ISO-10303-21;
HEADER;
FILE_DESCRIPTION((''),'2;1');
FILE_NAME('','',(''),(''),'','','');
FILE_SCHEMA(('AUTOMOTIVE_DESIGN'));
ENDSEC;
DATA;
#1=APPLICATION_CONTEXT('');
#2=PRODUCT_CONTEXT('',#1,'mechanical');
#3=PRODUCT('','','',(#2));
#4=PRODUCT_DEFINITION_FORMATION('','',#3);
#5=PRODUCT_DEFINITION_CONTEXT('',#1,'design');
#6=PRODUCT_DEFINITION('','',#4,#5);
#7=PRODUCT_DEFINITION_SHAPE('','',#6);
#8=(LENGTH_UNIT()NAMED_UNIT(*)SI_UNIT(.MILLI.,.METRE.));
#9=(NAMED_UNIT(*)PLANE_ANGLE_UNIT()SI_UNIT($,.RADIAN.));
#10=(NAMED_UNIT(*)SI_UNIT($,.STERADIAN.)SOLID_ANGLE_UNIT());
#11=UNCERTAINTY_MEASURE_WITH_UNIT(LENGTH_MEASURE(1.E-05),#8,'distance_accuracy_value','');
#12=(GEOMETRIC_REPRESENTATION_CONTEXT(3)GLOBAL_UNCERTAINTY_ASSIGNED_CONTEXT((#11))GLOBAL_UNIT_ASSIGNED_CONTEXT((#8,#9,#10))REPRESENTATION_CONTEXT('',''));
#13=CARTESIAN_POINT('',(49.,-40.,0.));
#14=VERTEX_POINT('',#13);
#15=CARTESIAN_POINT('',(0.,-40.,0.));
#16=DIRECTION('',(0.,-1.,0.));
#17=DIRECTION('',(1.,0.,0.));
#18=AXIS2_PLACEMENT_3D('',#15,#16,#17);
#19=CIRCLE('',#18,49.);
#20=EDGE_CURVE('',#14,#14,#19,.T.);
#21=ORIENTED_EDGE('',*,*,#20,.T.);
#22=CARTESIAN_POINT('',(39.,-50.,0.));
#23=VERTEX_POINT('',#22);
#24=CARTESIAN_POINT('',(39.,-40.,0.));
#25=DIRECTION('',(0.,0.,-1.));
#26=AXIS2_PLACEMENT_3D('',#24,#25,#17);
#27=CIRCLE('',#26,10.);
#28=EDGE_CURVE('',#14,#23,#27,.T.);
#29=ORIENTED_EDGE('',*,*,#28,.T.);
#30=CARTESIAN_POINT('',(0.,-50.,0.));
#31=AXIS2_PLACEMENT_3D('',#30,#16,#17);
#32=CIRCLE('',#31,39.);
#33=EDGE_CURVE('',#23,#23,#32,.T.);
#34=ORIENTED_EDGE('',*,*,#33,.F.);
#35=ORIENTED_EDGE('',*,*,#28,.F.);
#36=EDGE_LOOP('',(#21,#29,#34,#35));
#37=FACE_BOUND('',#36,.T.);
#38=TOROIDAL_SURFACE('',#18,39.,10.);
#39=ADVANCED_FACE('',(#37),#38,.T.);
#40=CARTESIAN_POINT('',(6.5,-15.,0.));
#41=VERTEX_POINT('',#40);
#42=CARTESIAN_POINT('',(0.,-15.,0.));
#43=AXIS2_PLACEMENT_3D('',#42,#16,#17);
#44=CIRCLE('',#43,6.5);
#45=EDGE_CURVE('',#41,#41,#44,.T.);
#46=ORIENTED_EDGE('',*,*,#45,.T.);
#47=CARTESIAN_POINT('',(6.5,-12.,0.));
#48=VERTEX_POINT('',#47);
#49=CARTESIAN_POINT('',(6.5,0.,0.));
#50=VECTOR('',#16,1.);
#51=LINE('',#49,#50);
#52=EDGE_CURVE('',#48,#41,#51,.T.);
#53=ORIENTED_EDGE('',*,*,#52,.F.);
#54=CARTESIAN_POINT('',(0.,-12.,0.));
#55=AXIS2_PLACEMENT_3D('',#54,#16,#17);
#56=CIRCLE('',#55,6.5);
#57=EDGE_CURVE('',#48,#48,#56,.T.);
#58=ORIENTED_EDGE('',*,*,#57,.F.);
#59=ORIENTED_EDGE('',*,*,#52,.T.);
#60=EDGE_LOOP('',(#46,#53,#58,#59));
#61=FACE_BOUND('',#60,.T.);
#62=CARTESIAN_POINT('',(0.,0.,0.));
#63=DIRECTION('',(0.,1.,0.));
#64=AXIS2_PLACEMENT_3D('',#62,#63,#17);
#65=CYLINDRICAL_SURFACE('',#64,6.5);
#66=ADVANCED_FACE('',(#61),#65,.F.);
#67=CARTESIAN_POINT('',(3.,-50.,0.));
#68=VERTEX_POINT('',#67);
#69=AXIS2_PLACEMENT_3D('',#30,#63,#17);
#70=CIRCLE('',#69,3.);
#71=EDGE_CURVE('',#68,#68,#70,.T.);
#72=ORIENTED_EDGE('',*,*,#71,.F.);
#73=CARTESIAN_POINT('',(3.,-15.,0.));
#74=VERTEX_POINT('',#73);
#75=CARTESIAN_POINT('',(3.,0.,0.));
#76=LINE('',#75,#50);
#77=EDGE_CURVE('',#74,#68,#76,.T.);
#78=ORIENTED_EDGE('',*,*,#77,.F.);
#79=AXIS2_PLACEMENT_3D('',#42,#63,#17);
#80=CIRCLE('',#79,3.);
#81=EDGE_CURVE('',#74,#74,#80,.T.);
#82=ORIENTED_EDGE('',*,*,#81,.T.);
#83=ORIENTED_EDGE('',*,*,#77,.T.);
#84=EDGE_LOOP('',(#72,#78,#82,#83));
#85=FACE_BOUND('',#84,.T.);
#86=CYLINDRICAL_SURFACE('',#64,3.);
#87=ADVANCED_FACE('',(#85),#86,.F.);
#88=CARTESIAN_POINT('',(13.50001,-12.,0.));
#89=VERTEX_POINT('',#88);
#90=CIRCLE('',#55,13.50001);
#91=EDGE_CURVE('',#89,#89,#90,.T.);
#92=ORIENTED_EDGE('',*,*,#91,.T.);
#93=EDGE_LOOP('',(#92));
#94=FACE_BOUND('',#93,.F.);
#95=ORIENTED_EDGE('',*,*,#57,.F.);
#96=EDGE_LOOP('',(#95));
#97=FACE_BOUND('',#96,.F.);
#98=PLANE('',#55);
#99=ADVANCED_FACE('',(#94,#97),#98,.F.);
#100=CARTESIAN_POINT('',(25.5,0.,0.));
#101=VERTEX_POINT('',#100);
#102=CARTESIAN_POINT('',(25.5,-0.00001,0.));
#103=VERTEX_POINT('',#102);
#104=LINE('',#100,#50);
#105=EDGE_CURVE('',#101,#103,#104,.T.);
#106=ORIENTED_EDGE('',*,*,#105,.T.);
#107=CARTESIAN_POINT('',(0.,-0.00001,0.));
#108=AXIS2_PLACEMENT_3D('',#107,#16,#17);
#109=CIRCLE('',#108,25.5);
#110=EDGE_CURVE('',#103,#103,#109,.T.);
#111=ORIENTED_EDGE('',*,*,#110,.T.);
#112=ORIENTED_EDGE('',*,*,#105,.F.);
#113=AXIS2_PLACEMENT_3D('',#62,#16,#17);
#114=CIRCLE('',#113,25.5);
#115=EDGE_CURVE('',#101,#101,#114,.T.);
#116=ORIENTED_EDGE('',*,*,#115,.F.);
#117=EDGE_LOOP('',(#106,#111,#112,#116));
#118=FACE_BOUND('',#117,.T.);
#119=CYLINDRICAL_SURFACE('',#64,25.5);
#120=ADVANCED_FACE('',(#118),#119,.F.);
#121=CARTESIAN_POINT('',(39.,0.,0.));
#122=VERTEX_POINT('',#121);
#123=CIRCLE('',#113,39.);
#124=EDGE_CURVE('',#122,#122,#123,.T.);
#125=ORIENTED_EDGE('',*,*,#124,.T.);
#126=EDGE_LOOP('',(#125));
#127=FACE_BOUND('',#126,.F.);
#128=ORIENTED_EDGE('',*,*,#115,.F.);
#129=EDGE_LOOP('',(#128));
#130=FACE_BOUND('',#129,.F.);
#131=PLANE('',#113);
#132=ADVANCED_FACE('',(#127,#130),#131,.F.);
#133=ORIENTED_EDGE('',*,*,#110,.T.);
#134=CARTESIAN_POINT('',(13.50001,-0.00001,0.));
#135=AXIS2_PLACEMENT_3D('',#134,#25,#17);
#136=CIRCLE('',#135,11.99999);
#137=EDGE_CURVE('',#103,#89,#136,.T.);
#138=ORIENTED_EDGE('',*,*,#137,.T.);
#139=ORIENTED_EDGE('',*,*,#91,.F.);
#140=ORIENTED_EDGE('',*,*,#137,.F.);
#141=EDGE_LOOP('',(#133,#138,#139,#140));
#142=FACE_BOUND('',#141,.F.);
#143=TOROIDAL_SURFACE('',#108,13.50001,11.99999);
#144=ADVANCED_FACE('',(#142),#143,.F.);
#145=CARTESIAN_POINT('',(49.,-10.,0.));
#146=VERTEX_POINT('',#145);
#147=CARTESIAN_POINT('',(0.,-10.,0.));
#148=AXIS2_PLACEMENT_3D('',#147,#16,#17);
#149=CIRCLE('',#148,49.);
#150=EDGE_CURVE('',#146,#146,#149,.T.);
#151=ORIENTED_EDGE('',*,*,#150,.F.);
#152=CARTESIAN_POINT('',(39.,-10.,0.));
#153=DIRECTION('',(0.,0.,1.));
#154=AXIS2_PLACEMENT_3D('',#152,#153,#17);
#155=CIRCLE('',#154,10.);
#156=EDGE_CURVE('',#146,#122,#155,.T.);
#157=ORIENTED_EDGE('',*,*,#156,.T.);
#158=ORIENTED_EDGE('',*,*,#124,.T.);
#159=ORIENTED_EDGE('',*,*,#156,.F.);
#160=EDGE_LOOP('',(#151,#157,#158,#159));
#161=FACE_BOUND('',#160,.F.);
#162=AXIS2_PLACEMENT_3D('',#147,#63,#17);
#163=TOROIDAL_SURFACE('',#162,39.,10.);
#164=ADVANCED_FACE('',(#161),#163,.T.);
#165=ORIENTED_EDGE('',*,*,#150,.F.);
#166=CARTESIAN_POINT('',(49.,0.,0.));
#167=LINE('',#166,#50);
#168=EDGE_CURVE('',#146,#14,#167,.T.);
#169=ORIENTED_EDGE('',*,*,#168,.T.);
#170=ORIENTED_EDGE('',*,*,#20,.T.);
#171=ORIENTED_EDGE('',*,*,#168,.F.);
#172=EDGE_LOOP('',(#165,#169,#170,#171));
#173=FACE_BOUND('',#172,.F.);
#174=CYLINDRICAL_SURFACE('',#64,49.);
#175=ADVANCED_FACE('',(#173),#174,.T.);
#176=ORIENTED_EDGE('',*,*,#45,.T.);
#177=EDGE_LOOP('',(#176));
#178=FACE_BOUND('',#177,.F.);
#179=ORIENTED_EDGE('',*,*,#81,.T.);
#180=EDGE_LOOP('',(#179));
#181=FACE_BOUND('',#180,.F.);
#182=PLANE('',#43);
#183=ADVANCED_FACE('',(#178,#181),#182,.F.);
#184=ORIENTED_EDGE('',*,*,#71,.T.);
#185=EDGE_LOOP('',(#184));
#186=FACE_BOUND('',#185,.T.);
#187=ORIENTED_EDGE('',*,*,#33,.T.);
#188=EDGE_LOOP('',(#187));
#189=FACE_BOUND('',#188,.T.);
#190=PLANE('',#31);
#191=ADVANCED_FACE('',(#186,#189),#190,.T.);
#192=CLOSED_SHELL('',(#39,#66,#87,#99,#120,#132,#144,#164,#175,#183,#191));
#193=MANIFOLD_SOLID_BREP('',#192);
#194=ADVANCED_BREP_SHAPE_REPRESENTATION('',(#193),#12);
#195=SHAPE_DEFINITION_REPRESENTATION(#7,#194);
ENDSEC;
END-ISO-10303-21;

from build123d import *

# Parameters (mm, degrees)
F0_R     = 49
F1_DEPTH = 50
F2_R     = 10
F4_R     = 25.5
F4_R_2   = 6.5
F5_DEPTH = 12
F6_DEPTH = 15
F7_R     = 11.99999
F4_R_3   = 3
F8_DEPTH = 50.001


# Not quite as in the source:
# - a fillet or chamfer is up to 0.001 mm smaller than in the source, because OpenCascade refuses the exact size


with BuildPart() as f1:
    # F0 (on Front) → F1 (new body)
    with BuildSketch(Plane.XZ):
        Circle(F0_R)
    extrude(amount=F1_DEPTH)

    # F2
    f2_edges = [f1.edges().sort_by_distance(p)[0] for p in [
        (-49, -50, 0),
        (-49, 0, 0),
    ]]
    fillet(f2_edges, radius=F2_R)

    # F4 (on Front) → F5 (cut)
    with BuildSketch(Plane.XZ):
        Circle(F4_R)
        Circle(F4_R_2, mode=Mode.SUBTRACT)
    extrude(amount=F5_DEPTH, mode=Mode.SUBTRACT)

    # F6 (cut): a face of the model
    f6_faces = [f1.faces().sort_by_distance(p)[0] for p in [
        (0, 0, 0),
    ]]
    extrude(f6_faces, amount=-F6_DEPTH, mode=Mode.SUBTRACT)

    # F7 (radius 12 in the source; OpenCascade refuses exactly that, so slightly less here)
    f7_edges = [f1.edges().sort_by_distance(p)[0] for p in [
        (-25.5, -12, 0),
    ]]
    fillet(f7_edges, radius=F7_R)

    # F4 (on Front) → F8 (cut, through all)
    with BuildSketch(Plane.XZ):
        Circle(F4_R_3)
    extrude(amount=F8_DEPTH, mode=Mode.SUBTRACT)


solid = f1.part
